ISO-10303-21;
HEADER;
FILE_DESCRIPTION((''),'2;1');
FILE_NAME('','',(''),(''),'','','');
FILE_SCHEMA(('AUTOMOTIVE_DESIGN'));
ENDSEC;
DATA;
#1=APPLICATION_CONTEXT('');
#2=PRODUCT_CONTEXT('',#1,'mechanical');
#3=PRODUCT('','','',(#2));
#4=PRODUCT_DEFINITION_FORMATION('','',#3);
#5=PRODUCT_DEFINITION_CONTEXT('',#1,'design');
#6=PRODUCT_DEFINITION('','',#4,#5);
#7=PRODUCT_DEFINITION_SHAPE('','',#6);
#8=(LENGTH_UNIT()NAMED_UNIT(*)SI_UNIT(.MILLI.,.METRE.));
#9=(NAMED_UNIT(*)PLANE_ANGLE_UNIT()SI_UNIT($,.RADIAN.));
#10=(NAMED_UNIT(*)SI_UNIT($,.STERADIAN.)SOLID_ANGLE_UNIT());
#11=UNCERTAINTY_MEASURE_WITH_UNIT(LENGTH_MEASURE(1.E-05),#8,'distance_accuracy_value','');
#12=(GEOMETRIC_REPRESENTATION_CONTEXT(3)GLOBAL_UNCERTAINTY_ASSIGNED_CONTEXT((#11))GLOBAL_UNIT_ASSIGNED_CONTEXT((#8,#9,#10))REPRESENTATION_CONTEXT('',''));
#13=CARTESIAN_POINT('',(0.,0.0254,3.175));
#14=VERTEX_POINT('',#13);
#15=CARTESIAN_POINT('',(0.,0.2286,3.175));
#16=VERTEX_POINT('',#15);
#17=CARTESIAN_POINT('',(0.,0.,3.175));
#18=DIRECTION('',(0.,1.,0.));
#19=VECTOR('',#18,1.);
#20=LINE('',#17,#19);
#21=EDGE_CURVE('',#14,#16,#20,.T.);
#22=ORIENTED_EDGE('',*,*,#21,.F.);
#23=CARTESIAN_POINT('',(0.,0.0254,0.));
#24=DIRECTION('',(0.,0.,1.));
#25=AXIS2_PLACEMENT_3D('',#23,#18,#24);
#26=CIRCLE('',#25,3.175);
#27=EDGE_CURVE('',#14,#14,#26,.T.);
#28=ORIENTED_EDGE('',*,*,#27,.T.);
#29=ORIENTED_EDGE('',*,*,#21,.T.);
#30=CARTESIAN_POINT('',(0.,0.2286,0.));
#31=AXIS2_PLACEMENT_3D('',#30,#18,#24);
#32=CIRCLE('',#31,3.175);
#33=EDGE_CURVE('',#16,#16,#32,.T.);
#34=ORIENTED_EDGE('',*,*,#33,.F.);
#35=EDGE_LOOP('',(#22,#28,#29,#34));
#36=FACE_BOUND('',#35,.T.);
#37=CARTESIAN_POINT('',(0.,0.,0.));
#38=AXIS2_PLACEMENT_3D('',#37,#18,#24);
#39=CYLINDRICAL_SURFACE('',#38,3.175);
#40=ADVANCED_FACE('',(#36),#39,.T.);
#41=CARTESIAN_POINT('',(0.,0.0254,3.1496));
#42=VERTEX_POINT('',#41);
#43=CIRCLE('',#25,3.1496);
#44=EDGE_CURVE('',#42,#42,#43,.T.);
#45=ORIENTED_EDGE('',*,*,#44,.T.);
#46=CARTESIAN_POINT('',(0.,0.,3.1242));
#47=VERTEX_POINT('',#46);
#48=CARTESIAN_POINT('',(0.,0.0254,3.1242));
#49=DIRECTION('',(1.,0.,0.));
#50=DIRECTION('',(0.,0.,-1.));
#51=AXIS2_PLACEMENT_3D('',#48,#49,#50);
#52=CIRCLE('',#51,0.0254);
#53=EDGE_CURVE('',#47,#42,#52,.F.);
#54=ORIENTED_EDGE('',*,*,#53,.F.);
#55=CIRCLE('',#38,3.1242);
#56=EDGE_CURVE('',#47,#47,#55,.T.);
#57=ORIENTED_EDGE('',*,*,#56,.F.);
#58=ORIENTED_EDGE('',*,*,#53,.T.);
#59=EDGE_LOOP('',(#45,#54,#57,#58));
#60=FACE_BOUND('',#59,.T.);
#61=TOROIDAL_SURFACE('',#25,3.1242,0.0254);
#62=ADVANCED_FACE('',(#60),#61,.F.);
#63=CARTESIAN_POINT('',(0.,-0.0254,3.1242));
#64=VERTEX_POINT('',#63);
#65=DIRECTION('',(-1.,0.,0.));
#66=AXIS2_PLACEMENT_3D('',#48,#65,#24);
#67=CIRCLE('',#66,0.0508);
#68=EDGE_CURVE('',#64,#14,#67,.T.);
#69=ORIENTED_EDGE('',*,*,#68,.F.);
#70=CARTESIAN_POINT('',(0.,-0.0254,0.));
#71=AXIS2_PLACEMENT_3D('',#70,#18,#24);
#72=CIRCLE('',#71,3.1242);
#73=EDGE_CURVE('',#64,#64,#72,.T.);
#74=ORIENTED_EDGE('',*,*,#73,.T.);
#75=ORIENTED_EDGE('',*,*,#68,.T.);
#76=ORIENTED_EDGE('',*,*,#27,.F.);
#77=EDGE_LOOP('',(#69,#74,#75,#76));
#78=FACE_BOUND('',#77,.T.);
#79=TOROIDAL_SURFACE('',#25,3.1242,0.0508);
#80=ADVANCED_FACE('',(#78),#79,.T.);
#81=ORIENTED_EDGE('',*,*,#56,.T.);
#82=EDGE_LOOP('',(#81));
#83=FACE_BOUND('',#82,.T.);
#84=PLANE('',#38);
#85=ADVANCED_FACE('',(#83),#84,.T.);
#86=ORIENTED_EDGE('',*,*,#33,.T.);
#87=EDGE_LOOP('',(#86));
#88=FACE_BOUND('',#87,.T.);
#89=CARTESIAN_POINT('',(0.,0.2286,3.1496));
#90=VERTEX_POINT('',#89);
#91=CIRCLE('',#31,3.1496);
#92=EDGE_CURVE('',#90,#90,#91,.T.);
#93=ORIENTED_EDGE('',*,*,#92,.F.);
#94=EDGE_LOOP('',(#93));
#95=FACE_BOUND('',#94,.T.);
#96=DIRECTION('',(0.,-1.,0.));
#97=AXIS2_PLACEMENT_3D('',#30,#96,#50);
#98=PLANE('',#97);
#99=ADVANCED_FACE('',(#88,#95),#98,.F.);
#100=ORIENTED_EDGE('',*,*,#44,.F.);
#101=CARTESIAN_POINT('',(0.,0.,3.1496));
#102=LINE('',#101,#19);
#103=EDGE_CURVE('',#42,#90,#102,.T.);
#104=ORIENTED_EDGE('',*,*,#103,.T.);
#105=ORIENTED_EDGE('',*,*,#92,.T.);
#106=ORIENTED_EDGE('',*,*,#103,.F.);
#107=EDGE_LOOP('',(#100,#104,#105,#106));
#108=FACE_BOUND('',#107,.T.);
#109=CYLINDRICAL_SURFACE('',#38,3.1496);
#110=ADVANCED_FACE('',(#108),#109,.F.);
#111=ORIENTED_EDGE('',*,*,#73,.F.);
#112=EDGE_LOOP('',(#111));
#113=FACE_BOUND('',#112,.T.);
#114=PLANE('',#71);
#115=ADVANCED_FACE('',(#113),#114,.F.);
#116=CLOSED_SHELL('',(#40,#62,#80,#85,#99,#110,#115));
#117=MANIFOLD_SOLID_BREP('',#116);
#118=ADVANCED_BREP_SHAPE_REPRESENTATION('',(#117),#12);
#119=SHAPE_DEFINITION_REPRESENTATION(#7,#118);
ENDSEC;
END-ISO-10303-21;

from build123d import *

# Parameters (mm, degrees)
SKETCH1_R          = 3.175
BASE_FLANGE1_DEPTH = 0.0254


# Read off the part's stored shape, not the designer's step: Edge-Flange1
# Sheet-metal steps are written as plain solids
with BuildPart() as part:
    # Sketch1 → Base-Flange1 (new body)
    with BuildSketch(Plane(origin=(0, 0, 0), x_dir=(1, 0, 0), z_dir=(0, 1, 0))):
        with Locations(Location((0, 0, 0), (0, 0, 270))):
            Circle(SKETCH1_R)
    extrude(amount=-BASE_FLANGE1_DEPTH)

    # Edge-Flange1 outline → Edge-Flange1 (revolve, cut)
    with BuildSketch(Plane.XY):
        with BuildLine():
            Line((3.175, 0), (3.16819409, 0))
            ThreePointArc((3.16819409, 0), (3.149599999, -0.01859409), (3.1242, -0.0254))
            Line((3.1242, -0.0254), (3.175, -0.0254))
            Line((3.175, -0.0254), (3.175, 0))
        make_face()
    revolve(axis=Axis((0, 0, 0), (0, 1, 0)), mode=Mode.SUBTRACT)

    # Edge-Flange1 2 outline → Edge-Flange1 2 (revolve)
    with BuildSketch(Plane.XY):
        with BuildLine():
            Line((3.175, 0.2286), (3.1496, 0.2286))
            Line((3.1496, 0.2286), (3.1496, 0.0254))
            ThreePointArc((3.1496, 0.0254), (3.142160512, 0.007439488), (3.1242, 0))
            Line((3.1242, 0), (3.16819409, 0))
            ThreePointArc((3.16819409, 0), (3.173269032, 0.012251992), (3.175, 0.0254))
            Line((3.175, 0.0254), (3.175, 0.2286))
        make_face()
    revolve(axis=Axis((0, 0, 0), (0, 1, 0)))


solid = part.part
